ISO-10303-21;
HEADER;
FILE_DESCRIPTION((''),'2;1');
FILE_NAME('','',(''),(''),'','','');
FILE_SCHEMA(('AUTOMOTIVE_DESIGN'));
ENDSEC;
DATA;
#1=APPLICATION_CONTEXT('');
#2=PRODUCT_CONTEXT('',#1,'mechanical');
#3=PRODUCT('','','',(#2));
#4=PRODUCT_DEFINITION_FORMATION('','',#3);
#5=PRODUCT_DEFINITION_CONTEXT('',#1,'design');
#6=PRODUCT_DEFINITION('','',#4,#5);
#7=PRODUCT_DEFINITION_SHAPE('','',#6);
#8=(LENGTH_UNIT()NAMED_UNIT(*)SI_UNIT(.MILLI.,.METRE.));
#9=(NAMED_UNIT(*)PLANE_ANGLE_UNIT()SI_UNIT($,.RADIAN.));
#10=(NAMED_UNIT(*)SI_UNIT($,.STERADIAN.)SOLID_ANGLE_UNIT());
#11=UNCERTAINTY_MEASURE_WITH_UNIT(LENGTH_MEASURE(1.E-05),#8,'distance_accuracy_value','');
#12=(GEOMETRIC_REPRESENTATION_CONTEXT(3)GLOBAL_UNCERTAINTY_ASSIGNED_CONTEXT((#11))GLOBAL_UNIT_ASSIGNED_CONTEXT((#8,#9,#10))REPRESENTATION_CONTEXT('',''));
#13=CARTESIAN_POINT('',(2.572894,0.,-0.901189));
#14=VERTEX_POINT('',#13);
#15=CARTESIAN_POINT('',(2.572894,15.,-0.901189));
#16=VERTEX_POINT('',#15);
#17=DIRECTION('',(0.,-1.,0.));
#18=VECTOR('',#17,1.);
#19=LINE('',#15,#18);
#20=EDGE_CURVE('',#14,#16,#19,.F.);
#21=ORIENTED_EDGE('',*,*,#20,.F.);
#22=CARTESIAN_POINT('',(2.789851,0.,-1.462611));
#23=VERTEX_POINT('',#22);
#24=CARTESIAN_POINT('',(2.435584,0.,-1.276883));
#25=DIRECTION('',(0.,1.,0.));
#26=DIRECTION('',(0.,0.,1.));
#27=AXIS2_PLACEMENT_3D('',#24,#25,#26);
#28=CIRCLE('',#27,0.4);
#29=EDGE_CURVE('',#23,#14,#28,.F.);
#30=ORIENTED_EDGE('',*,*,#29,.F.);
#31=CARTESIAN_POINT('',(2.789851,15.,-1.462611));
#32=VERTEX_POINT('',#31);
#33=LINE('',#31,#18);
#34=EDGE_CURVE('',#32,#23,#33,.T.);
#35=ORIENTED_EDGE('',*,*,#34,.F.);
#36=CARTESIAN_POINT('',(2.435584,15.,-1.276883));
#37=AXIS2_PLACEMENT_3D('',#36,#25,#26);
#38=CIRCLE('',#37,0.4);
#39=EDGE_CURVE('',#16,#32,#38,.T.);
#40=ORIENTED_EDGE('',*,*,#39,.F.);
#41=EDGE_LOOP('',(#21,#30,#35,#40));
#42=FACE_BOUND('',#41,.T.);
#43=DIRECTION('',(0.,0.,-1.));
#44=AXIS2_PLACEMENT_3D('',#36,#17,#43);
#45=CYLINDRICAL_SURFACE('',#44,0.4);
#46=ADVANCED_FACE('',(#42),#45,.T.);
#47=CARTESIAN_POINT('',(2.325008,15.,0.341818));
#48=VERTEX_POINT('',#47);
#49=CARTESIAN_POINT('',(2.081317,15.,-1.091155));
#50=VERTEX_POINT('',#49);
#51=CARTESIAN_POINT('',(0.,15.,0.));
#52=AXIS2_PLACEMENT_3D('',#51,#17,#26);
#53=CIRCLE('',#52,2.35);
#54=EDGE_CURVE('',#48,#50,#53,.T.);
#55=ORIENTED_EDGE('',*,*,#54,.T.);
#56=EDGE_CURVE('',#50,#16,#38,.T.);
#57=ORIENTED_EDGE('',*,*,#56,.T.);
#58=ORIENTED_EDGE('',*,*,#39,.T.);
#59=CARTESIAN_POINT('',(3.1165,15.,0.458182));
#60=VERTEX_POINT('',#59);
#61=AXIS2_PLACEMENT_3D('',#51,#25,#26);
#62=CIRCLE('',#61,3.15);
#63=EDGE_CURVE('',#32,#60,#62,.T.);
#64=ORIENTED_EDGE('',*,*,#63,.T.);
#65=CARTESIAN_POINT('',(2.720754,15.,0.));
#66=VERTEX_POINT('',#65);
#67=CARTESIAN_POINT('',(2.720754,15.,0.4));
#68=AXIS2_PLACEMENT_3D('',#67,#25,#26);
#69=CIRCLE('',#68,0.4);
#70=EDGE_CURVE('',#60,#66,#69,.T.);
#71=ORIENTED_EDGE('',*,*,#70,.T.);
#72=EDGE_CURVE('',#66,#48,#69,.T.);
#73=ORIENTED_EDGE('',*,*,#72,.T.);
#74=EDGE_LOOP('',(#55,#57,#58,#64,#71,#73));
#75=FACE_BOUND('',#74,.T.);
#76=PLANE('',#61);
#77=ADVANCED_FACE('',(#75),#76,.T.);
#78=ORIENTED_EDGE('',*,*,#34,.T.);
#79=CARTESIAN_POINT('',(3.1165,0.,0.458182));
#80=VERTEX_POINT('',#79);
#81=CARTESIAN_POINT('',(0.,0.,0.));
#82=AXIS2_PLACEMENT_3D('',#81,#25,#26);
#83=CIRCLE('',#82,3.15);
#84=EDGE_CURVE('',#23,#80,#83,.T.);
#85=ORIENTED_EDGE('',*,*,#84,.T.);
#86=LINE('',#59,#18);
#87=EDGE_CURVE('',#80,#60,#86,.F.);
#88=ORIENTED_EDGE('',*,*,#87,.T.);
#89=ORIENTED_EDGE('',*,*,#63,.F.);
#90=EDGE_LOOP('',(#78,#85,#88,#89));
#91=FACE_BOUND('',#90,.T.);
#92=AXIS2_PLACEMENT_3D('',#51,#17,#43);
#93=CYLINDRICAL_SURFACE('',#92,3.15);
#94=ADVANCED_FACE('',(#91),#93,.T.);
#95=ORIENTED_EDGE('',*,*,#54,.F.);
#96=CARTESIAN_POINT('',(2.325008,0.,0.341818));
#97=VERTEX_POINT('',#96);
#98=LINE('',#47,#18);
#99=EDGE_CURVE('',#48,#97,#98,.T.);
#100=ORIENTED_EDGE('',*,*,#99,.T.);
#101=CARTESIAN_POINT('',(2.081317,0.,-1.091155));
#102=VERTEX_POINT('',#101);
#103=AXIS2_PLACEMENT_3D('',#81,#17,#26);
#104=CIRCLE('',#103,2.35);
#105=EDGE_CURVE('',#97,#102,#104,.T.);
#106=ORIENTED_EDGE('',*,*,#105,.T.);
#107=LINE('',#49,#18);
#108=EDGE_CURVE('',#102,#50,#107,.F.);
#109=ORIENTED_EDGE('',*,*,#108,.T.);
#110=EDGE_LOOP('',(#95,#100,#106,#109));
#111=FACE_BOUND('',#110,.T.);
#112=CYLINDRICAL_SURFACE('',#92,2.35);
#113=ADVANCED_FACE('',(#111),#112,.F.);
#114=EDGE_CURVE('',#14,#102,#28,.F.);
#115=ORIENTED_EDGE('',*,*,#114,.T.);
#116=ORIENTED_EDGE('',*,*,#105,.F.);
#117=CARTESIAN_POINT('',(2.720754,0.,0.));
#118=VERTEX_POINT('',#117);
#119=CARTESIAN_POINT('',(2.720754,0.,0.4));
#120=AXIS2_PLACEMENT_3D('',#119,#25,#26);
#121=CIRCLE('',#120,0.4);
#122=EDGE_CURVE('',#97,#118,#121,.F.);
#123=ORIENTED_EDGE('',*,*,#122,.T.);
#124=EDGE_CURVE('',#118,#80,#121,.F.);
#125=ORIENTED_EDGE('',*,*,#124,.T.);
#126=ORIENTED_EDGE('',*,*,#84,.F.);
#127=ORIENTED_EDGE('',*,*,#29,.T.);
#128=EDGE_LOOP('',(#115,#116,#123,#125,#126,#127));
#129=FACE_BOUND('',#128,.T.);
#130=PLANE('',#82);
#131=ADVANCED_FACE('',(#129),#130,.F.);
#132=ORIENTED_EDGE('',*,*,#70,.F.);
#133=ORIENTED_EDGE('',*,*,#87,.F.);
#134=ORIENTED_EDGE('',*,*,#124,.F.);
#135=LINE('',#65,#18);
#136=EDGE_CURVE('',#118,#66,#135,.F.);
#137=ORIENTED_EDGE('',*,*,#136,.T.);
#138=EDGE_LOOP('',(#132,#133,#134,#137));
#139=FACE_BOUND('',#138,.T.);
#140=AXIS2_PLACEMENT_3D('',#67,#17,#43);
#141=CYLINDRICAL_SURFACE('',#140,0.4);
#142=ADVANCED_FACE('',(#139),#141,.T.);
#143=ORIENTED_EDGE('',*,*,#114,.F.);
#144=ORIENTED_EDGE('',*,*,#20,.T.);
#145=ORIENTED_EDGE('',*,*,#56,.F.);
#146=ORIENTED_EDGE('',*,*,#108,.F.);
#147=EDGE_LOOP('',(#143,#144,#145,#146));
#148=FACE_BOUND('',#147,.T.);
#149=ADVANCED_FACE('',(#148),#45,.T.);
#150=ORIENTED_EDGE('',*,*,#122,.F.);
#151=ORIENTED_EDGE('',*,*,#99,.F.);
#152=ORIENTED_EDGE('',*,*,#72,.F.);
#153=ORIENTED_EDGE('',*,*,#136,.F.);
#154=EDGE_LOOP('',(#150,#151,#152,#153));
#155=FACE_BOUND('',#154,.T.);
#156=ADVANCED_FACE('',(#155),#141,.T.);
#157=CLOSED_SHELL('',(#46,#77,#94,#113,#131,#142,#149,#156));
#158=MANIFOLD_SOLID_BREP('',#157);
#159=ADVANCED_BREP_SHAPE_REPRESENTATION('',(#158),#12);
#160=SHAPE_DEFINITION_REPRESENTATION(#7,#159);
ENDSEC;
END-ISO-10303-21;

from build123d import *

# Parameters (mm, degrees)
BOSS_EXTRUDE1_DEPTH = 15
FILLET1_R           = 0.4


with BuildPart() as part:
    # Sketch1 → Boss-Extrude1 (new body)
    with BuildSketch(Plane(origin=(0, 0, 0), x_dir=(1, 0, 0), z_dir=(0, 1, 0))):
        with BuildLine():
            Line((2.219557977, 0.772050767), (2.971014846, 1.046695174))
            ThreePointArc((2.971014846, 1.046695174), (-3.104931301, -0.530944082), (3.15, 0))
            Line((3.15, 0), (2.35, 0))
            ThreePointArc((2.35, 0), (-2.317160034, -0.391496331), (2.219557977, 0.772050767))
        make_face()
    extrude(amount=BOSS_EXTRUDE1_DEPTH)

    # Fillet1
    fillet1_edges = [part.edges().sort_by_distance(p)[0] for p in [
        (3.15, 7.5, 0),
        (2.35, 7.5, 0),
        (2.219557977, 7.5, -0.772050767),
        (2.971014846, 7.5, -1.046695174),
    ]]
    fillet(fillet1_edges, radius=FILLET1_R - 0.0001)  # a hair under: the kernel refuses the full size


solid = part.part
